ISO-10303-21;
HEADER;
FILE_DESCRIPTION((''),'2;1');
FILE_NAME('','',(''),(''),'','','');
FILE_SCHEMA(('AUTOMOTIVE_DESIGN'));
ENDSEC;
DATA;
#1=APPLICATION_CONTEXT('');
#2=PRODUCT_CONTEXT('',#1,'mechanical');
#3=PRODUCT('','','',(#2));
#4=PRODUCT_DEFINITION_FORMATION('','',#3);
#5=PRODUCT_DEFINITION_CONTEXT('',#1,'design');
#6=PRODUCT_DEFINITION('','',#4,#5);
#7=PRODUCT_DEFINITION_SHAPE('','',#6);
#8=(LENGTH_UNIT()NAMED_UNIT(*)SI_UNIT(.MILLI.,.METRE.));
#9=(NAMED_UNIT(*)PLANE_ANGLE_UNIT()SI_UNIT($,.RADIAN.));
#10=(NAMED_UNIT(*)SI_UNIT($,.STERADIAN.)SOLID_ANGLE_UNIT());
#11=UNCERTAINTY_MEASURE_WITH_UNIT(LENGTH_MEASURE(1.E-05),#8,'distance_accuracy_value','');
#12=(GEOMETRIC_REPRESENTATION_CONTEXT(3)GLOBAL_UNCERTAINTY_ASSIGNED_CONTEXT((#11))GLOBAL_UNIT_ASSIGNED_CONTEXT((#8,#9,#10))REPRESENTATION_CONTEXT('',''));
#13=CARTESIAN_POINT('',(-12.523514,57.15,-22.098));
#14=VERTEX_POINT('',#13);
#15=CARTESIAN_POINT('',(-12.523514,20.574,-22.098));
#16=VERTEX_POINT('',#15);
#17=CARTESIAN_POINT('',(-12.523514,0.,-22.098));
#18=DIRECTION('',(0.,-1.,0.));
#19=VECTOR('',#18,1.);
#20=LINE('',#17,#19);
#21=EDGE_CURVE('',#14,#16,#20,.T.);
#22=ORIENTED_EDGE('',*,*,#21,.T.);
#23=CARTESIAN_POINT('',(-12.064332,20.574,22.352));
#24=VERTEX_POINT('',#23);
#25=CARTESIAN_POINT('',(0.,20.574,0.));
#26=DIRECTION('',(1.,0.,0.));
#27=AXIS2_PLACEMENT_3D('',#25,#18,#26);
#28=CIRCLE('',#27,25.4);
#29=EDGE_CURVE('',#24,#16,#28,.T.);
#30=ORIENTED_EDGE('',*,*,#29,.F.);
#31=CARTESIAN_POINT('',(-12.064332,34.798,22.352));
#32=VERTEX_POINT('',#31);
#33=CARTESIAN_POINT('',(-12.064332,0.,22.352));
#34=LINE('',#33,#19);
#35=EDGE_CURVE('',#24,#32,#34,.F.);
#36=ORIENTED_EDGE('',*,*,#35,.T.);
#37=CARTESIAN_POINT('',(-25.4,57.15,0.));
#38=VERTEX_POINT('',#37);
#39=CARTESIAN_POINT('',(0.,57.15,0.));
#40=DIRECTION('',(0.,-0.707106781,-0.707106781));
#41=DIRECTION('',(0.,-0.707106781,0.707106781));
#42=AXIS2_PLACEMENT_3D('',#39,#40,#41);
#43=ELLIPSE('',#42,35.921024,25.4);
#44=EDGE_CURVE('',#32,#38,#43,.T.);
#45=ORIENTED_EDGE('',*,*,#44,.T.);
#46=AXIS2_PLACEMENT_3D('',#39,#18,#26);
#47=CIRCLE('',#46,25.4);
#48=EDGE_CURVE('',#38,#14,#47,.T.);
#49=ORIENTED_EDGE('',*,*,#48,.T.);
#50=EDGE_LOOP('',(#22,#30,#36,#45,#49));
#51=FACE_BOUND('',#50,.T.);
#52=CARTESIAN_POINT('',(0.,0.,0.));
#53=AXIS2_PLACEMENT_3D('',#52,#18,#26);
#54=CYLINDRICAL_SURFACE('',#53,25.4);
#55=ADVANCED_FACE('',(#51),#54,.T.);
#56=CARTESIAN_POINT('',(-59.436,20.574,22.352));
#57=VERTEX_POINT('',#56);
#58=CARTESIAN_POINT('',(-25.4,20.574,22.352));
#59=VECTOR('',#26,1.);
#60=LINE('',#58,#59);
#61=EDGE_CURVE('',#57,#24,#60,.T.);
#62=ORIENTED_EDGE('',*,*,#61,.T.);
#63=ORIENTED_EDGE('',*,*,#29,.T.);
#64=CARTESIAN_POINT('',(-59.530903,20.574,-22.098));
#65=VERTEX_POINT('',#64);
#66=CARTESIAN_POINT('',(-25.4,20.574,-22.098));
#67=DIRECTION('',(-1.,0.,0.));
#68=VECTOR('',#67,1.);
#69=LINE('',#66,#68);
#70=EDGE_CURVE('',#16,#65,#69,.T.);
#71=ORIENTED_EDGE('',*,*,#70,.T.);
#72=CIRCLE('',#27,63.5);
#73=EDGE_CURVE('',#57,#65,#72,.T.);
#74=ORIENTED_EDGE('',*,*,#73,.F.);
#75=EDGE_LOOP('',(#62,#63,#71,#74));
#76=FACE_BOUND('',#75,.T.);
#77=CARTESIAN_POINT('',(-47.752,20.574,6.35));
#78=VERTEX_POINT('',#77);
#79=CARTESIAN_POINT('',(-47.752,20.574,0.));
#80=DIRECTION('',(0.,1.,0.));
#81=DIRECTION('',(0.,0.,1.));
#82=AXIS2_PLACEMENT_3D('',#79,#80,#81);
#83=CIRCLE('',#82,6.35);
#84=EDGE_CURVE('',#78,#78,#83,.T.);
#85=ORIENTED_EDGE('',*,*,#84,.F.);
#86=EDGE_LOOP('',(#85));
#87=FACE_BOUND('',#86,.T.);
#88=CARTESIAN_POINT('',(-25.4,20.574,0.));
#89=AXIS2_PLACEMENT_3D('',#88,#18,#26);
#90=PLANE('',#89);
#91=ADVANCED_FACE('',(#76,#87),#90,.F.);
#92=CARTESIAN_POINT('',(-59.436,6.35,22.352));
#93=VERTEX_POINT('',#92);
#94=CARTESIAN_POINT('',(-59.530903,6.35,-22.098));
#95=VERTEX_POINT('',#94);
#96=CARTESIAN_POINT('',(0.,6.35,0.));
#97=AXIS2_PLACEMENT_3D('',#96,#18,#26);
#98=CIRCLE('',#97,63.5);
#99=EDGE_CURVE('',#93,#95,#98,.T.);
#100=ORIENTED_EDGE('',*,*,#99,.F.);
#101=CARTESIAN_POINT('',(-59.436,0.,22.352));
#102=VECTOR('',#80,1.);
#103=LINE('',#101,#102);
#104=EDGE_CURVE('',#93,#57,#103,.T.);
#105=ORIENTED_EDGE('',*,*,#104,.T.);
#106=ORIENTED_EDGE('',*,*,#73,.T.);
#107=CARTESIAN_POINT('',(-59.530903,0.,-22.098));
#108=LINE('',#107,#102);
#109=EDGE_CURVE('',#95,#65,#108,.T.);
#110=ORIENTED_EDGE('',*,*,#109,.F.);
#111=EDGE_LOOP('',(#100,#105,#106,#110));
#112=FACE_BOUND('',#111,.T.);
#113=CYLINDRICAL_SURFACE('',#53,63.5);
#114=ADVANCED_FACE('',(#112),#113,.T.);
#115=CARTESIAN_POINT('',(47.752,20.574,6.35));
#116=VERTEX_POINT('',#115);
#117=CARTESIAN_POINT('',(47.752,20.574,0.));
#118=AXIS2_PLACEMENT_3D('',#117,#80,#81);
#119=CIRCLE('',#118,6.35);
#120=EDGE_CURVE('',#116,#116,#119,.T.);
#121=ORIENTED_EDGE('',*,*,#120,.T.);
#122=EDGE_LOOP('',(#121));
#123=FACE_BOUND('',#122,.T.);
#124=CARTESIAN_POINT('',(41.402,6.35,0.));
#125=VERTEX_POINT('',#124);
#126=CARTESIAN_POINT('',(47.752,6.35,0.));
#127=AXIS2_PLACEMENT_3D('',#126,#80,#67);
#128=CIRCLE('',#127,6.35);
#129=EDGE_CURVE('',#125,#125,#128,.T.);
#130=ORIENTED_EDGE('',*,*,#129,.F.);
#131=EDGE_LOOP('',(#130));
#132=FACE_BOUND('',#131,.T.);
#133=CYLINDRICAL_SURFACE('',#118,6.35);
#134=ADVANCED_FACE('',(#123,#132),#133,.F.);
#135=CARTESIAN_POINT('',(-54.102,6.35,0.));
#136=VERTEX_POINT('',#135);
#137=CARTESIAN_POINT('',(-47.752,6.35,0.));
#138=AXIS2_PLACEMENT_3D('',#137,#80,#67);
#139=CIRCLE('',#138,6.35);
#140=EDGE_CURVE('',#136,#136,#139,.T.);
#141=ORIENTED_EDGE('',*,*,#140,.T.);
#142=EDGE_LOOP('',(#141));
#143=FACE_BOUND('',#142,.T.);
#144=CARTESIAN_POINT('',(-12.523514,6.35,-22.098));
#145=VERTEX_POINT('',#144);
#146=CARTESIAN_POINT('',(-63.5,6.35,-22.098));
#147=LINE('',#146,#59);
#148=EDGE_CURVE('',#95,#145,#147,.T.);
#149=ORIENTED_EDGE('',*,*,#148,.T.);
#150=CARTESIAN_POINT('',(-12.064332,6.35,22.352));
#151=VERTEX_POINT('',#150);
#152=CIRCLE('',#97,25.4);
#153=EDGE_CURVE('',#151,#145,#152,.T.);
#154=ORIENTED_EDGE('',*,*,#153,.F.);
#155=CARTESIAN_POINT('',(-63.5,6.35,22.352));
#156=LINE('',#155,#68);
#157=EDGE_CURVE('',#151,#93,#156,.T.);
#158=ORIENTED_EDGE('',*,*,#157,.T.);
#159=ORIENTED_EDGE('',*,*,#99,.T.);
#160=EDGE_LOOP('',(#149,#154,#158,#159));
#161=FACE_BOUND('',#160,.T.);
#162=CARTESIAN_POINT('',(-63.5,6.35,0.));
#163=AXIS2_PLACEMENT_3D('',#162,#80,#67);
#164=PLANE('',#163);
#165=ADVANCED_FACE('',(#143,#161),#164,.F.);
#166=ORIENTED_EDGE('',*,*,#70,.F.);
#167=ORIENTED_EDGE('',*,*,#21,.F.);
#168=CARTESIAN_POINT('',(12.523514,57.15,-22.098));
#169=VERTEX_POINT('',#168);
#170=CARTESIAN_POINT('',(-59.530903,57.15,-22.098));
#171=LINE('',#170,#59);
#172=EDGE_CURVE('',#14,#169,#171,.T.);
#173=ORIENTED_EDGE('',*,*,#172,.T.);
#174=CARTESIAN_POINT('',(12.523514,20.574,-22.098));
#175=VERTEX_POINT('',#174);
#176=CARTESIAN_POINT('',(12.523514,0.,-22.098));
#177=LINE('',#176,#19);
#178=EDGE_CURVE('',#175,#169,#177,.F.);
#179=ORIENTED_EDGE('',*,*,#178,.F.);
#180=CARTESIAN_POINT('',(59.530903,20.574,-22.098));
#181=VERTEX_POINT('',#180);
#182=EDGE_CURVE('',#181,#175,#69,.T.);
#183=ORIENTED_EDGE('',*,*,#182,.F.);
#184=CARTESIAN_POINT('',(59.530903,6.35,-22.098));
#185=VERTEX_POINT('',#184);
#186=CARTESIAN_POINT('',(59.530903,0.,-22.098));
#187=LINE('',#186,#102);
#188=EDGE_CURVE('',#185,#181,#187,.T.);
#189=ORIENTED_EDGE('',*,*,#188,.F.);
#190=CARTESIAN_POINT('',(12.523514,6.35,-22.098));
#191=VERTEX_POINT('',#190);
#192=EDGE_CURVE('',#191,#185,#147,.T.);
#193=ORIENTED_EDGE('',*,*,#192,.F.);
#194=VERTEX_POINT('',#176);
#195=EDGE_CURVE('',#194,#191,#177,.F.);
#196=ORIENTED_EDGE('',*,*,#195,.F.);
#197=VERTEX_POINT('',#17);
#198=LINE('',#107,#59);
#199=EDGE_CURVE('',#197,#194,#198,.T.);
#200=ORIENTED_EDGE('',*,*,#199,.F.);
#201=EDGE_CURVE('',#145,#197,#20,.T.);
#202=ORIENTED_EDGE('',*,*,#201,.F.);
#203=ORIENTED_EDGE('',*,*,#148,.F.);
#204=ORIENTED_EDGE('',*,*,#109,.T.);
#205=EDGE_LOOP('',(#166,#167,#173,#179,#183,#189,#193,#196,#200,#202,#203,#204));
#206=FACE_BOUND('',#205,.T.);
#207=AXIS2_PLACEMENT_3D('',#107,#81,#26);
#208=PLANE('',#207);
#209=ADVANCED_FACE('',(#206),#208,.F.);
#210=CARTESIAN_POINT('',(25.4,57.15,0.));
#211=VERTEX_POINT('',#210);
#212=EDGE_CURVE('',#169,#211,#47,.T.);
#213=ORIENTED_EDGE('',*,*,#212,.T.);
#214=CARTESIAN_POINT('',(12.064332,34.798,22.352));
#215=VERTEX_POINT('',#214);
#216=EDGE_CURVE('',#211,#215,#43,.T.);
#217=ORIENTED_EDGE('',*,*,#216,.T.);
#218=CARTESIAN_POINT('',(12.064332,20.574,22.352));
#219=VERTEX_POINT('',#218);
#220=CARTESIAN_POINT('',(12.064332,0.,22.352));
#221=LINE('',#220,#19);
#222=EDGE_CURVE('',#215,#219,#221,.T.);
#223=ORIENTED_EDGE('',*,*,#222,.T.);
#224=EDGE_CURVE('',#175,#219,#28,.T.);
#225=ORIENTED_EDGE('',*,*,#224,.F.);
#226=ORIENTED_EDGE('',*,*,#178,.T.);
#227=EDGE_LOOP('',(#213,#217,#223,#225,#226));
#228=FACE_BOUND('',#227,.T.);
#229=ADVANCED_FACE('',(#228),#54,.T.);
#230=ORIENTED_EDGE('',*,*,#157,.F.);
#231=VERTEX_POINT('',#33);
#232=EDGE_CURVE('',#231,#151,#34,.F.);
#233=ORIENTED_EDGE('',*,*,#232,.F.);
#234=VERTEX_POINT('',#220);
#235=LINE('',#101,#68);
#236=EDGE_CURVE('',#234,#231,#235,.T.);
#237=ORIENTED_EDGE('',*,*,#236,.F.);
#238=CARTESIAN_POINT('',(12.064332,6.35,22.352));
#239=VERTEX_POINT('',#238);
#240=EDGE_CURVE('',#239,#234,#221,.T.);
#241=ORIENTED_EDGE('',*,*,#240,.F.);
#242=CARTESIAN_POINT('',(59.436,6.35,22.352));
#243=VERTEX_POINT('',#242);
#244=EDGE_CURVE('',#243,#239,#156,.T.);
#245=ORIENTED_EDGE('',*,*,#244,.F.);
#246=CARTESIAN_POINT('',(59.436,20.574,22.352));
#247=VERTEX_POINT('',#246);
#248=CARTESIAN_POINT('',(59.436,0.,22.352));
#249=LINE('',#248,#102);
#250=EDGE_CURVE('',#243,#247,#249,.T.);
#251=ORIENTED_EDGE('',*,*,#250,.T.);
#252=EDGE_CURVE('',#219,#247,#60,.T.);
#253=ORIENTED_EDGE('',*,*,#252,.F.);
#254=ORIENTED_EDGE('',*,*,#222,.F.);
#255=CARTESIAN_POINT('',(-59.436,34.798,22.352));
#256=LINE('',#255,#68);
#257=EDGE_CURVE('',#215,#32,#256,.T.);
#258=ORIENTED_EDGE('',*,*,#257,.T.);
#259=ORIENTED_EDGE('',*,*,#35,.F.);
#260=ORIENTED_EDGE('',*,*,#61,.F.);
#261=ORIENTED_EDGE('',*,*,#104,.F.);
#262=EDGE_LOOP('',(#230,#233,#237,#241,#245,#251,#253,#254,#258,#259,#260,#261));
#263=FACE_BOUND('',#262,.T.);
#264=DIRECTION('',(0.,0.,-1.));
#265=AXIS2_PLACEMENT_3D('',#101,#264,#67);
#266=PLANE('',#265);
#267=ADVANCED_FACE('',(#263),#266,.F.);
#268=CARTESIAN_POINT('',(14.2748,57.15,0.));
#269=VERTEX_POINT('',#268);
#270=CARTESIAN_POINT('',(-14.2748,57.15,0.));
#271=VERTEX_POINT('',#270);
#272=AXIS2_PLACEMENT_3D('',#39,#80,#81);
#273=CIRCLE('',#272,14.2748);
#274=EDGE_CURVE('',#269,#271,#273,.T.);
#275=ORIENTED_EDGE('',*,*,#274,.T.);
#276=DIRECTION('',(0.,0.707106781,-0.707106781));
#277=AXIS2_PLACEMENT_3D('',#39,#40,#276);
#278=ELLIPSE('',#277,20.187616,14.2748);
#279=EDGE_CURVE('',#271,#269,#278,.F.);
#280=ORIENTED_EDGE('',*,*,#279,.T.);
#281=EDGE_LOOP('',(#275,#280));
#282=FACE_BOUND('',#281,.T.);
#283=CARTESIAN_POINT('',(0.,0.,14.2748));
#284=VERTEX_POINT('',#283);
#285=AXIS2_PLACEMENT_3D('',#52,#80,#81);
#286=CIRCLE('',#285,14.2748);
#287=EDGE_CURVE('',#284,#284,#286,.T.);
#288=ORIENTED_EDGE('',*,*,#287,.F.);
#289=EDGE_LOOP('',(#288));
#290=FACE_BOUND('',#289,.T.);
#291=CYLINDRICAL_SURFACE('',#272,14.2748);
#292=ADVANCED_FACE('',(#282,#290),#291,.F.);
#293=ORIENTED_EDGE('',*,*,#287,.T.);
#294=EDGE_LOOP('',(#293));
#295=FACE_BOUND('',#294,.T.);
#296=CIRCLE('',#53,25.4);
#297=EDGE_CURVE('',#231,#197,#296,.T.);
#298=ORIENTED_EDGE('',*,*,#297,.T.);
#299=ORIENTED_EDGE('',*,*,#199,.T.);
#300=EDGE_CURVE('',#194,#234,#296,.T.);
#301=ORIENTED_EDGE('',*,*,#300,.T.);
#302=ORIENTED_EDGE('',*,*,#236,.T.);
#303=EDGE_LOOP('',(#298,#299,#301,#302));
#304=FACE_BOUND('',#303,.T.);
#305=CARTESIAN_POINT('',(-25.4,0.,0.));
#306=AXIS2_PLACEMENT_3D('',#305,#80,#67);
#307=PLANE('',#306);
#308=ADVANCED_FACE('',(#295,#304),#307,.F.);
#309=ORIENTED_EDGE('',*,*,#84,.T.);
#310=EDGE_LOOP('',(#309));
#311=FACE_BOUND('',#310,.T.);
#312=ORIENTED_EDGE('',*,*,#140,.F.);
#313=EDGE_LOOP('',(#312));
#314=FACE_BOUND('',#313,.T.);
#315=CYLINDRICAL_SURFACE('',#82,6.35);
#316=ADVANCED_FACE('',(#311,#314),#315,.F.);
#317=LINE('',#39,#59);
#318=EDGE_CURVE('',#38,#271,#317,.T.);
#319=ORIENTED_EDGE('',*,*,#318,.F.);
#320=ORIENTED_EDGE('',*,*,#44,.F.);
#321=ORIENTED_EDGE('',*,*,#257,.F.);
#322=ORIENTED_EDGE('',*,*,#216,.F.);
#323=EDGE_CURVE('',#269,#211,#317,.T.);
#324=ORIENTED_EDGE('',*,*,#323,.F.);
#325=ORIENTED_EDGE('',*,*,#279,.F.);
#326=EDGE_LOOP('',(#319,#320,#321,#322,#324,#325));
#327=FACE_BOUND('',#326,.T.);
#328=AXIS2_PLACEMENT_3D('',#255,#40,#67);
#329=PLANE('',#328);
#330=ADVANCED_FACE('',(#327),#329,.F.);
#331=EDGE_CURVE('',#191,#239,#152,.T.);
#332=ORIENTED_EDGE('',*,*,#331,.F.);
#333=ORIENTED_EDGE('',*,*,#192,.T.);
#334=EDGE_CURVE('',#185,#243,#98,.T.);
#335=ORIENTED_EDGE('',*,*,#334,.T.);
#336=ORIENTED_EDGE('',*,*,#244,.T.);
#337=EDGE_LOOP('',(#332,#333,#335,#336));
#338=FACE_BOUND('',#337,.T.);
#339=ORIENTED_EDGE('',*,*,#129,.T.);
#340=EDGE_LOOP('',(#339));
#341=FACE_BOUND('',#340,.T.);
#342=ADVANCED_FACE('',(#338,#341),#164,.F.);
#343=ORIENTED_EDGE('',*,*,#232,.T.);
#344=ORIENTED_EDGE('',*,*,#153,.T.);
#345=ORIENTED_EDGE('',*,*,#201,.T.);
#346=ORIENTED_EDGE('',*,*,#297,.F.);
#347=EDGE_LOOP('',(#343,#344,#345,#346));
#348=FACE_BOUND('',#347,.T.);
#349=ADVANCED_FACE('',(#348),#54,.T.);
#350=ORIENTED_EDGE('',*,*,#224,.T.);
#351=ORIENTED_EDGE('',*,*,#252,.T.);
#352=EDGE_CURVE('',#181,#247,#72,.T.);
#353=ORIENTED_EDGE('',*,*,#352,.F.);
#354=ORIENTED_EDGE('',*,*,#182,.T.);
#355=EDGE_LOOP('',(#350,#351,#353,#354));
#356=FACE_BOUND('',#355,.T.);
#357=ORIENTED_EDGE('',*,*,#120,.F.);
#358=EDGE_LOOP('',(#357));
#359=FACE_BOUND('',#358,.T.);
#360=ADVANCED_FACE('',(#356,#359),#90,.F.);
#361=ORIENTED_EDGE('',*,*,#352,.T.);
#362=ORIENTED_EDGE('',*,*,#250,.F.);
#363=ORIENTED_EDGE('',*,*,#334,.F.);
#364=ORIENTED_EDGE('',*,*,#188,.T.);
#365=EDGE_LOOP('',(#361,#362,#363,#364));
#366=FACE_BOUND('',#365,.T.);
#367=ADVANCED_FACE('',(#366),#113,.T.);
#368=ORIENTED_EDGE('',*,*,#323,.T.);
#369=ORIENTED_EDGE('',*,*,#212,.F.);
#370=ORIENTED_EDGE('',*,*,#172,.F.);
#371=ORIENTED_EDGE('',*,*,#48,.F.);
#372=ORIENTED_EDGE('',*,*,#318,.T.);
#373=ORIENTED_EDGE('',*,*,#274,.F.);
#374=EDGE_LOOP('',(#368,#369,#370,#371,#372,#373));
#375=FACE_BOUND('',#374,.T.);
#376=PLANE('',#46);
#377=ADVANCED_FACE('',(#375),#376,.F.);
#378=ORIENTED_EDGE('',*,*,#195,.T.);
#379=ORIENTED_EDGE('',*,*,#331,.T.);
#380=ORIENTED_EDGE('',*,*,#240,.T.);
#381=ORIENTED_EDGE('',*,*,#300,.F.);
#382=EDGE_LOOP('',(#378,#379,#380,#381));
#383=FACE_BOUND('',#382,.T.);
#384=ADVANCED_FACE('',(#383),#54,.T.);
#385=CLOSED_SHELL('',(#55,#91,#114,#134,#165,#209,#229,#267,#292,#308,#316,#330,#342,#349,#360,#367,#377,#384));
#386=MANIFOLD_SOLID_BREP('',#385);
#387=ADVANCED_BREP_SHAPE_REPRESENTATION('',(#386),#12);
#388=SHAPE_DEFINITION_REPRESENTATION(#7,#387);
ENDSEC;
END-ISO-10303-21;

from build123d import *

# Parameters (mm, degrees)
SKETCH3_W                  = 118.872
SKETCH3_H                  = 41.148
CUT_EXTRUDE1_DEPTH         = 107.4453968
SKETCH4_W                  = 119.061805732
SKETCH4_H                  = 41.402
CUT_EXTRUDE2_DEPTH         = 107.4453968
F_1_2_1_124_DOWEL_HOLE1_D  = 28.5496
F_1_2_0_5000_DOWEL_HOLE1_D = 12.7
CHAMFER1_SIZE              = 22.352


with BuildPart() as part:
    # Sketch2 → Revolve1 (revolve)
    with BuildSketch(Plane.XY, mode=Mode.PRIVATE) as revolve1_sk:
        Polygon((-63.5, 20.574), (-63.5, 6.35), (-25.4, 6.35), (-25.4, 0), (0, 0), (0, 57.15), (-25.4, 57.15), (-25.4, 20.574), align=None)
    revolve(revolve1_sk.sketch.rotate(Axis((0, 0, 0), (0, 1, 0)), 180), axis=Axis((0, 0, 0), (0, 1, 0)))

    # Sketch3 → Cut-Extrude1 (cut, through all)
    with BuildSketch(Plane(origin=(0, 57.15, 0), x_dir=(1, 0, 0), z_dir=(0, 1, 0))):
        with Locations((0, -42.926)):
            Rectangle(SKETCH3_W, SKETCH3_H)
    extrude(amount=-CUT_EXTRUDE1_DEPTH, mode=Mode.SUBTRACT)

    # Sketch4 → Cut-Extrude2 (cut, through all)
    with BuildSketch(Plane(origin=(0, 57.15, 0), x_dir=(1, 0, 0), z_dir=(0, 1, 0))):
        with Locations((0, 42.799)):
            Rectangle(SKETCH4_W, SKETCH4_H)
    extrude(amount=-CUT_EXTRUDE2_DEPTH, mode=Mode.SUBTRACT)

    # 1/2 (1.124) Dowel Hole1 (through all)
    with Locations(Plane(origin=(0, 57.15, 0), x_dir=(1, 0, 0), z_dir=(0, 1, 0))):
        with Locations((0, 0)):
            Hole(F_1_2_1_124_DOWEL_HOLE1_D / 2)

    # 1/2 (0.5000) Dowel Hole1 (through all)
    with Locations(Plane(origin=(0, 20.574, 0), x_dir=(1, 0, 0), z_dir=(0, 1, 0))):
        with Locations((-47.752, 0), (47.752, 0)):
            Hole(F_1_2_0_5000_DOWEL_HOLE1_D / 2)

    # Chamfer1
    # the kernel refuses this chamfer: 22.352 mm, written as the material it takes off along each edge
    with BuildSketch(Plane(origin=(-69.546589707, 57.15, 22.352), x_dir=(0, -0.9996219169112968, 0.027495876610586365), z_dir=(1, 0, 0))) as chamfer1_piece_1:
        Polygon((CHAMFER1_SIZE * 0.999621916911, CHAMFER1_SIZE * 0.0274958766106), (-CHAMFER1_SIZE * 0.0274958766106, CHAMFER1_SIZE * 0.999621916911), (0, 0), align=None)
    extrude(amount=139.093179415, mode=Mode.SUBTRACT)


solid = part.part
